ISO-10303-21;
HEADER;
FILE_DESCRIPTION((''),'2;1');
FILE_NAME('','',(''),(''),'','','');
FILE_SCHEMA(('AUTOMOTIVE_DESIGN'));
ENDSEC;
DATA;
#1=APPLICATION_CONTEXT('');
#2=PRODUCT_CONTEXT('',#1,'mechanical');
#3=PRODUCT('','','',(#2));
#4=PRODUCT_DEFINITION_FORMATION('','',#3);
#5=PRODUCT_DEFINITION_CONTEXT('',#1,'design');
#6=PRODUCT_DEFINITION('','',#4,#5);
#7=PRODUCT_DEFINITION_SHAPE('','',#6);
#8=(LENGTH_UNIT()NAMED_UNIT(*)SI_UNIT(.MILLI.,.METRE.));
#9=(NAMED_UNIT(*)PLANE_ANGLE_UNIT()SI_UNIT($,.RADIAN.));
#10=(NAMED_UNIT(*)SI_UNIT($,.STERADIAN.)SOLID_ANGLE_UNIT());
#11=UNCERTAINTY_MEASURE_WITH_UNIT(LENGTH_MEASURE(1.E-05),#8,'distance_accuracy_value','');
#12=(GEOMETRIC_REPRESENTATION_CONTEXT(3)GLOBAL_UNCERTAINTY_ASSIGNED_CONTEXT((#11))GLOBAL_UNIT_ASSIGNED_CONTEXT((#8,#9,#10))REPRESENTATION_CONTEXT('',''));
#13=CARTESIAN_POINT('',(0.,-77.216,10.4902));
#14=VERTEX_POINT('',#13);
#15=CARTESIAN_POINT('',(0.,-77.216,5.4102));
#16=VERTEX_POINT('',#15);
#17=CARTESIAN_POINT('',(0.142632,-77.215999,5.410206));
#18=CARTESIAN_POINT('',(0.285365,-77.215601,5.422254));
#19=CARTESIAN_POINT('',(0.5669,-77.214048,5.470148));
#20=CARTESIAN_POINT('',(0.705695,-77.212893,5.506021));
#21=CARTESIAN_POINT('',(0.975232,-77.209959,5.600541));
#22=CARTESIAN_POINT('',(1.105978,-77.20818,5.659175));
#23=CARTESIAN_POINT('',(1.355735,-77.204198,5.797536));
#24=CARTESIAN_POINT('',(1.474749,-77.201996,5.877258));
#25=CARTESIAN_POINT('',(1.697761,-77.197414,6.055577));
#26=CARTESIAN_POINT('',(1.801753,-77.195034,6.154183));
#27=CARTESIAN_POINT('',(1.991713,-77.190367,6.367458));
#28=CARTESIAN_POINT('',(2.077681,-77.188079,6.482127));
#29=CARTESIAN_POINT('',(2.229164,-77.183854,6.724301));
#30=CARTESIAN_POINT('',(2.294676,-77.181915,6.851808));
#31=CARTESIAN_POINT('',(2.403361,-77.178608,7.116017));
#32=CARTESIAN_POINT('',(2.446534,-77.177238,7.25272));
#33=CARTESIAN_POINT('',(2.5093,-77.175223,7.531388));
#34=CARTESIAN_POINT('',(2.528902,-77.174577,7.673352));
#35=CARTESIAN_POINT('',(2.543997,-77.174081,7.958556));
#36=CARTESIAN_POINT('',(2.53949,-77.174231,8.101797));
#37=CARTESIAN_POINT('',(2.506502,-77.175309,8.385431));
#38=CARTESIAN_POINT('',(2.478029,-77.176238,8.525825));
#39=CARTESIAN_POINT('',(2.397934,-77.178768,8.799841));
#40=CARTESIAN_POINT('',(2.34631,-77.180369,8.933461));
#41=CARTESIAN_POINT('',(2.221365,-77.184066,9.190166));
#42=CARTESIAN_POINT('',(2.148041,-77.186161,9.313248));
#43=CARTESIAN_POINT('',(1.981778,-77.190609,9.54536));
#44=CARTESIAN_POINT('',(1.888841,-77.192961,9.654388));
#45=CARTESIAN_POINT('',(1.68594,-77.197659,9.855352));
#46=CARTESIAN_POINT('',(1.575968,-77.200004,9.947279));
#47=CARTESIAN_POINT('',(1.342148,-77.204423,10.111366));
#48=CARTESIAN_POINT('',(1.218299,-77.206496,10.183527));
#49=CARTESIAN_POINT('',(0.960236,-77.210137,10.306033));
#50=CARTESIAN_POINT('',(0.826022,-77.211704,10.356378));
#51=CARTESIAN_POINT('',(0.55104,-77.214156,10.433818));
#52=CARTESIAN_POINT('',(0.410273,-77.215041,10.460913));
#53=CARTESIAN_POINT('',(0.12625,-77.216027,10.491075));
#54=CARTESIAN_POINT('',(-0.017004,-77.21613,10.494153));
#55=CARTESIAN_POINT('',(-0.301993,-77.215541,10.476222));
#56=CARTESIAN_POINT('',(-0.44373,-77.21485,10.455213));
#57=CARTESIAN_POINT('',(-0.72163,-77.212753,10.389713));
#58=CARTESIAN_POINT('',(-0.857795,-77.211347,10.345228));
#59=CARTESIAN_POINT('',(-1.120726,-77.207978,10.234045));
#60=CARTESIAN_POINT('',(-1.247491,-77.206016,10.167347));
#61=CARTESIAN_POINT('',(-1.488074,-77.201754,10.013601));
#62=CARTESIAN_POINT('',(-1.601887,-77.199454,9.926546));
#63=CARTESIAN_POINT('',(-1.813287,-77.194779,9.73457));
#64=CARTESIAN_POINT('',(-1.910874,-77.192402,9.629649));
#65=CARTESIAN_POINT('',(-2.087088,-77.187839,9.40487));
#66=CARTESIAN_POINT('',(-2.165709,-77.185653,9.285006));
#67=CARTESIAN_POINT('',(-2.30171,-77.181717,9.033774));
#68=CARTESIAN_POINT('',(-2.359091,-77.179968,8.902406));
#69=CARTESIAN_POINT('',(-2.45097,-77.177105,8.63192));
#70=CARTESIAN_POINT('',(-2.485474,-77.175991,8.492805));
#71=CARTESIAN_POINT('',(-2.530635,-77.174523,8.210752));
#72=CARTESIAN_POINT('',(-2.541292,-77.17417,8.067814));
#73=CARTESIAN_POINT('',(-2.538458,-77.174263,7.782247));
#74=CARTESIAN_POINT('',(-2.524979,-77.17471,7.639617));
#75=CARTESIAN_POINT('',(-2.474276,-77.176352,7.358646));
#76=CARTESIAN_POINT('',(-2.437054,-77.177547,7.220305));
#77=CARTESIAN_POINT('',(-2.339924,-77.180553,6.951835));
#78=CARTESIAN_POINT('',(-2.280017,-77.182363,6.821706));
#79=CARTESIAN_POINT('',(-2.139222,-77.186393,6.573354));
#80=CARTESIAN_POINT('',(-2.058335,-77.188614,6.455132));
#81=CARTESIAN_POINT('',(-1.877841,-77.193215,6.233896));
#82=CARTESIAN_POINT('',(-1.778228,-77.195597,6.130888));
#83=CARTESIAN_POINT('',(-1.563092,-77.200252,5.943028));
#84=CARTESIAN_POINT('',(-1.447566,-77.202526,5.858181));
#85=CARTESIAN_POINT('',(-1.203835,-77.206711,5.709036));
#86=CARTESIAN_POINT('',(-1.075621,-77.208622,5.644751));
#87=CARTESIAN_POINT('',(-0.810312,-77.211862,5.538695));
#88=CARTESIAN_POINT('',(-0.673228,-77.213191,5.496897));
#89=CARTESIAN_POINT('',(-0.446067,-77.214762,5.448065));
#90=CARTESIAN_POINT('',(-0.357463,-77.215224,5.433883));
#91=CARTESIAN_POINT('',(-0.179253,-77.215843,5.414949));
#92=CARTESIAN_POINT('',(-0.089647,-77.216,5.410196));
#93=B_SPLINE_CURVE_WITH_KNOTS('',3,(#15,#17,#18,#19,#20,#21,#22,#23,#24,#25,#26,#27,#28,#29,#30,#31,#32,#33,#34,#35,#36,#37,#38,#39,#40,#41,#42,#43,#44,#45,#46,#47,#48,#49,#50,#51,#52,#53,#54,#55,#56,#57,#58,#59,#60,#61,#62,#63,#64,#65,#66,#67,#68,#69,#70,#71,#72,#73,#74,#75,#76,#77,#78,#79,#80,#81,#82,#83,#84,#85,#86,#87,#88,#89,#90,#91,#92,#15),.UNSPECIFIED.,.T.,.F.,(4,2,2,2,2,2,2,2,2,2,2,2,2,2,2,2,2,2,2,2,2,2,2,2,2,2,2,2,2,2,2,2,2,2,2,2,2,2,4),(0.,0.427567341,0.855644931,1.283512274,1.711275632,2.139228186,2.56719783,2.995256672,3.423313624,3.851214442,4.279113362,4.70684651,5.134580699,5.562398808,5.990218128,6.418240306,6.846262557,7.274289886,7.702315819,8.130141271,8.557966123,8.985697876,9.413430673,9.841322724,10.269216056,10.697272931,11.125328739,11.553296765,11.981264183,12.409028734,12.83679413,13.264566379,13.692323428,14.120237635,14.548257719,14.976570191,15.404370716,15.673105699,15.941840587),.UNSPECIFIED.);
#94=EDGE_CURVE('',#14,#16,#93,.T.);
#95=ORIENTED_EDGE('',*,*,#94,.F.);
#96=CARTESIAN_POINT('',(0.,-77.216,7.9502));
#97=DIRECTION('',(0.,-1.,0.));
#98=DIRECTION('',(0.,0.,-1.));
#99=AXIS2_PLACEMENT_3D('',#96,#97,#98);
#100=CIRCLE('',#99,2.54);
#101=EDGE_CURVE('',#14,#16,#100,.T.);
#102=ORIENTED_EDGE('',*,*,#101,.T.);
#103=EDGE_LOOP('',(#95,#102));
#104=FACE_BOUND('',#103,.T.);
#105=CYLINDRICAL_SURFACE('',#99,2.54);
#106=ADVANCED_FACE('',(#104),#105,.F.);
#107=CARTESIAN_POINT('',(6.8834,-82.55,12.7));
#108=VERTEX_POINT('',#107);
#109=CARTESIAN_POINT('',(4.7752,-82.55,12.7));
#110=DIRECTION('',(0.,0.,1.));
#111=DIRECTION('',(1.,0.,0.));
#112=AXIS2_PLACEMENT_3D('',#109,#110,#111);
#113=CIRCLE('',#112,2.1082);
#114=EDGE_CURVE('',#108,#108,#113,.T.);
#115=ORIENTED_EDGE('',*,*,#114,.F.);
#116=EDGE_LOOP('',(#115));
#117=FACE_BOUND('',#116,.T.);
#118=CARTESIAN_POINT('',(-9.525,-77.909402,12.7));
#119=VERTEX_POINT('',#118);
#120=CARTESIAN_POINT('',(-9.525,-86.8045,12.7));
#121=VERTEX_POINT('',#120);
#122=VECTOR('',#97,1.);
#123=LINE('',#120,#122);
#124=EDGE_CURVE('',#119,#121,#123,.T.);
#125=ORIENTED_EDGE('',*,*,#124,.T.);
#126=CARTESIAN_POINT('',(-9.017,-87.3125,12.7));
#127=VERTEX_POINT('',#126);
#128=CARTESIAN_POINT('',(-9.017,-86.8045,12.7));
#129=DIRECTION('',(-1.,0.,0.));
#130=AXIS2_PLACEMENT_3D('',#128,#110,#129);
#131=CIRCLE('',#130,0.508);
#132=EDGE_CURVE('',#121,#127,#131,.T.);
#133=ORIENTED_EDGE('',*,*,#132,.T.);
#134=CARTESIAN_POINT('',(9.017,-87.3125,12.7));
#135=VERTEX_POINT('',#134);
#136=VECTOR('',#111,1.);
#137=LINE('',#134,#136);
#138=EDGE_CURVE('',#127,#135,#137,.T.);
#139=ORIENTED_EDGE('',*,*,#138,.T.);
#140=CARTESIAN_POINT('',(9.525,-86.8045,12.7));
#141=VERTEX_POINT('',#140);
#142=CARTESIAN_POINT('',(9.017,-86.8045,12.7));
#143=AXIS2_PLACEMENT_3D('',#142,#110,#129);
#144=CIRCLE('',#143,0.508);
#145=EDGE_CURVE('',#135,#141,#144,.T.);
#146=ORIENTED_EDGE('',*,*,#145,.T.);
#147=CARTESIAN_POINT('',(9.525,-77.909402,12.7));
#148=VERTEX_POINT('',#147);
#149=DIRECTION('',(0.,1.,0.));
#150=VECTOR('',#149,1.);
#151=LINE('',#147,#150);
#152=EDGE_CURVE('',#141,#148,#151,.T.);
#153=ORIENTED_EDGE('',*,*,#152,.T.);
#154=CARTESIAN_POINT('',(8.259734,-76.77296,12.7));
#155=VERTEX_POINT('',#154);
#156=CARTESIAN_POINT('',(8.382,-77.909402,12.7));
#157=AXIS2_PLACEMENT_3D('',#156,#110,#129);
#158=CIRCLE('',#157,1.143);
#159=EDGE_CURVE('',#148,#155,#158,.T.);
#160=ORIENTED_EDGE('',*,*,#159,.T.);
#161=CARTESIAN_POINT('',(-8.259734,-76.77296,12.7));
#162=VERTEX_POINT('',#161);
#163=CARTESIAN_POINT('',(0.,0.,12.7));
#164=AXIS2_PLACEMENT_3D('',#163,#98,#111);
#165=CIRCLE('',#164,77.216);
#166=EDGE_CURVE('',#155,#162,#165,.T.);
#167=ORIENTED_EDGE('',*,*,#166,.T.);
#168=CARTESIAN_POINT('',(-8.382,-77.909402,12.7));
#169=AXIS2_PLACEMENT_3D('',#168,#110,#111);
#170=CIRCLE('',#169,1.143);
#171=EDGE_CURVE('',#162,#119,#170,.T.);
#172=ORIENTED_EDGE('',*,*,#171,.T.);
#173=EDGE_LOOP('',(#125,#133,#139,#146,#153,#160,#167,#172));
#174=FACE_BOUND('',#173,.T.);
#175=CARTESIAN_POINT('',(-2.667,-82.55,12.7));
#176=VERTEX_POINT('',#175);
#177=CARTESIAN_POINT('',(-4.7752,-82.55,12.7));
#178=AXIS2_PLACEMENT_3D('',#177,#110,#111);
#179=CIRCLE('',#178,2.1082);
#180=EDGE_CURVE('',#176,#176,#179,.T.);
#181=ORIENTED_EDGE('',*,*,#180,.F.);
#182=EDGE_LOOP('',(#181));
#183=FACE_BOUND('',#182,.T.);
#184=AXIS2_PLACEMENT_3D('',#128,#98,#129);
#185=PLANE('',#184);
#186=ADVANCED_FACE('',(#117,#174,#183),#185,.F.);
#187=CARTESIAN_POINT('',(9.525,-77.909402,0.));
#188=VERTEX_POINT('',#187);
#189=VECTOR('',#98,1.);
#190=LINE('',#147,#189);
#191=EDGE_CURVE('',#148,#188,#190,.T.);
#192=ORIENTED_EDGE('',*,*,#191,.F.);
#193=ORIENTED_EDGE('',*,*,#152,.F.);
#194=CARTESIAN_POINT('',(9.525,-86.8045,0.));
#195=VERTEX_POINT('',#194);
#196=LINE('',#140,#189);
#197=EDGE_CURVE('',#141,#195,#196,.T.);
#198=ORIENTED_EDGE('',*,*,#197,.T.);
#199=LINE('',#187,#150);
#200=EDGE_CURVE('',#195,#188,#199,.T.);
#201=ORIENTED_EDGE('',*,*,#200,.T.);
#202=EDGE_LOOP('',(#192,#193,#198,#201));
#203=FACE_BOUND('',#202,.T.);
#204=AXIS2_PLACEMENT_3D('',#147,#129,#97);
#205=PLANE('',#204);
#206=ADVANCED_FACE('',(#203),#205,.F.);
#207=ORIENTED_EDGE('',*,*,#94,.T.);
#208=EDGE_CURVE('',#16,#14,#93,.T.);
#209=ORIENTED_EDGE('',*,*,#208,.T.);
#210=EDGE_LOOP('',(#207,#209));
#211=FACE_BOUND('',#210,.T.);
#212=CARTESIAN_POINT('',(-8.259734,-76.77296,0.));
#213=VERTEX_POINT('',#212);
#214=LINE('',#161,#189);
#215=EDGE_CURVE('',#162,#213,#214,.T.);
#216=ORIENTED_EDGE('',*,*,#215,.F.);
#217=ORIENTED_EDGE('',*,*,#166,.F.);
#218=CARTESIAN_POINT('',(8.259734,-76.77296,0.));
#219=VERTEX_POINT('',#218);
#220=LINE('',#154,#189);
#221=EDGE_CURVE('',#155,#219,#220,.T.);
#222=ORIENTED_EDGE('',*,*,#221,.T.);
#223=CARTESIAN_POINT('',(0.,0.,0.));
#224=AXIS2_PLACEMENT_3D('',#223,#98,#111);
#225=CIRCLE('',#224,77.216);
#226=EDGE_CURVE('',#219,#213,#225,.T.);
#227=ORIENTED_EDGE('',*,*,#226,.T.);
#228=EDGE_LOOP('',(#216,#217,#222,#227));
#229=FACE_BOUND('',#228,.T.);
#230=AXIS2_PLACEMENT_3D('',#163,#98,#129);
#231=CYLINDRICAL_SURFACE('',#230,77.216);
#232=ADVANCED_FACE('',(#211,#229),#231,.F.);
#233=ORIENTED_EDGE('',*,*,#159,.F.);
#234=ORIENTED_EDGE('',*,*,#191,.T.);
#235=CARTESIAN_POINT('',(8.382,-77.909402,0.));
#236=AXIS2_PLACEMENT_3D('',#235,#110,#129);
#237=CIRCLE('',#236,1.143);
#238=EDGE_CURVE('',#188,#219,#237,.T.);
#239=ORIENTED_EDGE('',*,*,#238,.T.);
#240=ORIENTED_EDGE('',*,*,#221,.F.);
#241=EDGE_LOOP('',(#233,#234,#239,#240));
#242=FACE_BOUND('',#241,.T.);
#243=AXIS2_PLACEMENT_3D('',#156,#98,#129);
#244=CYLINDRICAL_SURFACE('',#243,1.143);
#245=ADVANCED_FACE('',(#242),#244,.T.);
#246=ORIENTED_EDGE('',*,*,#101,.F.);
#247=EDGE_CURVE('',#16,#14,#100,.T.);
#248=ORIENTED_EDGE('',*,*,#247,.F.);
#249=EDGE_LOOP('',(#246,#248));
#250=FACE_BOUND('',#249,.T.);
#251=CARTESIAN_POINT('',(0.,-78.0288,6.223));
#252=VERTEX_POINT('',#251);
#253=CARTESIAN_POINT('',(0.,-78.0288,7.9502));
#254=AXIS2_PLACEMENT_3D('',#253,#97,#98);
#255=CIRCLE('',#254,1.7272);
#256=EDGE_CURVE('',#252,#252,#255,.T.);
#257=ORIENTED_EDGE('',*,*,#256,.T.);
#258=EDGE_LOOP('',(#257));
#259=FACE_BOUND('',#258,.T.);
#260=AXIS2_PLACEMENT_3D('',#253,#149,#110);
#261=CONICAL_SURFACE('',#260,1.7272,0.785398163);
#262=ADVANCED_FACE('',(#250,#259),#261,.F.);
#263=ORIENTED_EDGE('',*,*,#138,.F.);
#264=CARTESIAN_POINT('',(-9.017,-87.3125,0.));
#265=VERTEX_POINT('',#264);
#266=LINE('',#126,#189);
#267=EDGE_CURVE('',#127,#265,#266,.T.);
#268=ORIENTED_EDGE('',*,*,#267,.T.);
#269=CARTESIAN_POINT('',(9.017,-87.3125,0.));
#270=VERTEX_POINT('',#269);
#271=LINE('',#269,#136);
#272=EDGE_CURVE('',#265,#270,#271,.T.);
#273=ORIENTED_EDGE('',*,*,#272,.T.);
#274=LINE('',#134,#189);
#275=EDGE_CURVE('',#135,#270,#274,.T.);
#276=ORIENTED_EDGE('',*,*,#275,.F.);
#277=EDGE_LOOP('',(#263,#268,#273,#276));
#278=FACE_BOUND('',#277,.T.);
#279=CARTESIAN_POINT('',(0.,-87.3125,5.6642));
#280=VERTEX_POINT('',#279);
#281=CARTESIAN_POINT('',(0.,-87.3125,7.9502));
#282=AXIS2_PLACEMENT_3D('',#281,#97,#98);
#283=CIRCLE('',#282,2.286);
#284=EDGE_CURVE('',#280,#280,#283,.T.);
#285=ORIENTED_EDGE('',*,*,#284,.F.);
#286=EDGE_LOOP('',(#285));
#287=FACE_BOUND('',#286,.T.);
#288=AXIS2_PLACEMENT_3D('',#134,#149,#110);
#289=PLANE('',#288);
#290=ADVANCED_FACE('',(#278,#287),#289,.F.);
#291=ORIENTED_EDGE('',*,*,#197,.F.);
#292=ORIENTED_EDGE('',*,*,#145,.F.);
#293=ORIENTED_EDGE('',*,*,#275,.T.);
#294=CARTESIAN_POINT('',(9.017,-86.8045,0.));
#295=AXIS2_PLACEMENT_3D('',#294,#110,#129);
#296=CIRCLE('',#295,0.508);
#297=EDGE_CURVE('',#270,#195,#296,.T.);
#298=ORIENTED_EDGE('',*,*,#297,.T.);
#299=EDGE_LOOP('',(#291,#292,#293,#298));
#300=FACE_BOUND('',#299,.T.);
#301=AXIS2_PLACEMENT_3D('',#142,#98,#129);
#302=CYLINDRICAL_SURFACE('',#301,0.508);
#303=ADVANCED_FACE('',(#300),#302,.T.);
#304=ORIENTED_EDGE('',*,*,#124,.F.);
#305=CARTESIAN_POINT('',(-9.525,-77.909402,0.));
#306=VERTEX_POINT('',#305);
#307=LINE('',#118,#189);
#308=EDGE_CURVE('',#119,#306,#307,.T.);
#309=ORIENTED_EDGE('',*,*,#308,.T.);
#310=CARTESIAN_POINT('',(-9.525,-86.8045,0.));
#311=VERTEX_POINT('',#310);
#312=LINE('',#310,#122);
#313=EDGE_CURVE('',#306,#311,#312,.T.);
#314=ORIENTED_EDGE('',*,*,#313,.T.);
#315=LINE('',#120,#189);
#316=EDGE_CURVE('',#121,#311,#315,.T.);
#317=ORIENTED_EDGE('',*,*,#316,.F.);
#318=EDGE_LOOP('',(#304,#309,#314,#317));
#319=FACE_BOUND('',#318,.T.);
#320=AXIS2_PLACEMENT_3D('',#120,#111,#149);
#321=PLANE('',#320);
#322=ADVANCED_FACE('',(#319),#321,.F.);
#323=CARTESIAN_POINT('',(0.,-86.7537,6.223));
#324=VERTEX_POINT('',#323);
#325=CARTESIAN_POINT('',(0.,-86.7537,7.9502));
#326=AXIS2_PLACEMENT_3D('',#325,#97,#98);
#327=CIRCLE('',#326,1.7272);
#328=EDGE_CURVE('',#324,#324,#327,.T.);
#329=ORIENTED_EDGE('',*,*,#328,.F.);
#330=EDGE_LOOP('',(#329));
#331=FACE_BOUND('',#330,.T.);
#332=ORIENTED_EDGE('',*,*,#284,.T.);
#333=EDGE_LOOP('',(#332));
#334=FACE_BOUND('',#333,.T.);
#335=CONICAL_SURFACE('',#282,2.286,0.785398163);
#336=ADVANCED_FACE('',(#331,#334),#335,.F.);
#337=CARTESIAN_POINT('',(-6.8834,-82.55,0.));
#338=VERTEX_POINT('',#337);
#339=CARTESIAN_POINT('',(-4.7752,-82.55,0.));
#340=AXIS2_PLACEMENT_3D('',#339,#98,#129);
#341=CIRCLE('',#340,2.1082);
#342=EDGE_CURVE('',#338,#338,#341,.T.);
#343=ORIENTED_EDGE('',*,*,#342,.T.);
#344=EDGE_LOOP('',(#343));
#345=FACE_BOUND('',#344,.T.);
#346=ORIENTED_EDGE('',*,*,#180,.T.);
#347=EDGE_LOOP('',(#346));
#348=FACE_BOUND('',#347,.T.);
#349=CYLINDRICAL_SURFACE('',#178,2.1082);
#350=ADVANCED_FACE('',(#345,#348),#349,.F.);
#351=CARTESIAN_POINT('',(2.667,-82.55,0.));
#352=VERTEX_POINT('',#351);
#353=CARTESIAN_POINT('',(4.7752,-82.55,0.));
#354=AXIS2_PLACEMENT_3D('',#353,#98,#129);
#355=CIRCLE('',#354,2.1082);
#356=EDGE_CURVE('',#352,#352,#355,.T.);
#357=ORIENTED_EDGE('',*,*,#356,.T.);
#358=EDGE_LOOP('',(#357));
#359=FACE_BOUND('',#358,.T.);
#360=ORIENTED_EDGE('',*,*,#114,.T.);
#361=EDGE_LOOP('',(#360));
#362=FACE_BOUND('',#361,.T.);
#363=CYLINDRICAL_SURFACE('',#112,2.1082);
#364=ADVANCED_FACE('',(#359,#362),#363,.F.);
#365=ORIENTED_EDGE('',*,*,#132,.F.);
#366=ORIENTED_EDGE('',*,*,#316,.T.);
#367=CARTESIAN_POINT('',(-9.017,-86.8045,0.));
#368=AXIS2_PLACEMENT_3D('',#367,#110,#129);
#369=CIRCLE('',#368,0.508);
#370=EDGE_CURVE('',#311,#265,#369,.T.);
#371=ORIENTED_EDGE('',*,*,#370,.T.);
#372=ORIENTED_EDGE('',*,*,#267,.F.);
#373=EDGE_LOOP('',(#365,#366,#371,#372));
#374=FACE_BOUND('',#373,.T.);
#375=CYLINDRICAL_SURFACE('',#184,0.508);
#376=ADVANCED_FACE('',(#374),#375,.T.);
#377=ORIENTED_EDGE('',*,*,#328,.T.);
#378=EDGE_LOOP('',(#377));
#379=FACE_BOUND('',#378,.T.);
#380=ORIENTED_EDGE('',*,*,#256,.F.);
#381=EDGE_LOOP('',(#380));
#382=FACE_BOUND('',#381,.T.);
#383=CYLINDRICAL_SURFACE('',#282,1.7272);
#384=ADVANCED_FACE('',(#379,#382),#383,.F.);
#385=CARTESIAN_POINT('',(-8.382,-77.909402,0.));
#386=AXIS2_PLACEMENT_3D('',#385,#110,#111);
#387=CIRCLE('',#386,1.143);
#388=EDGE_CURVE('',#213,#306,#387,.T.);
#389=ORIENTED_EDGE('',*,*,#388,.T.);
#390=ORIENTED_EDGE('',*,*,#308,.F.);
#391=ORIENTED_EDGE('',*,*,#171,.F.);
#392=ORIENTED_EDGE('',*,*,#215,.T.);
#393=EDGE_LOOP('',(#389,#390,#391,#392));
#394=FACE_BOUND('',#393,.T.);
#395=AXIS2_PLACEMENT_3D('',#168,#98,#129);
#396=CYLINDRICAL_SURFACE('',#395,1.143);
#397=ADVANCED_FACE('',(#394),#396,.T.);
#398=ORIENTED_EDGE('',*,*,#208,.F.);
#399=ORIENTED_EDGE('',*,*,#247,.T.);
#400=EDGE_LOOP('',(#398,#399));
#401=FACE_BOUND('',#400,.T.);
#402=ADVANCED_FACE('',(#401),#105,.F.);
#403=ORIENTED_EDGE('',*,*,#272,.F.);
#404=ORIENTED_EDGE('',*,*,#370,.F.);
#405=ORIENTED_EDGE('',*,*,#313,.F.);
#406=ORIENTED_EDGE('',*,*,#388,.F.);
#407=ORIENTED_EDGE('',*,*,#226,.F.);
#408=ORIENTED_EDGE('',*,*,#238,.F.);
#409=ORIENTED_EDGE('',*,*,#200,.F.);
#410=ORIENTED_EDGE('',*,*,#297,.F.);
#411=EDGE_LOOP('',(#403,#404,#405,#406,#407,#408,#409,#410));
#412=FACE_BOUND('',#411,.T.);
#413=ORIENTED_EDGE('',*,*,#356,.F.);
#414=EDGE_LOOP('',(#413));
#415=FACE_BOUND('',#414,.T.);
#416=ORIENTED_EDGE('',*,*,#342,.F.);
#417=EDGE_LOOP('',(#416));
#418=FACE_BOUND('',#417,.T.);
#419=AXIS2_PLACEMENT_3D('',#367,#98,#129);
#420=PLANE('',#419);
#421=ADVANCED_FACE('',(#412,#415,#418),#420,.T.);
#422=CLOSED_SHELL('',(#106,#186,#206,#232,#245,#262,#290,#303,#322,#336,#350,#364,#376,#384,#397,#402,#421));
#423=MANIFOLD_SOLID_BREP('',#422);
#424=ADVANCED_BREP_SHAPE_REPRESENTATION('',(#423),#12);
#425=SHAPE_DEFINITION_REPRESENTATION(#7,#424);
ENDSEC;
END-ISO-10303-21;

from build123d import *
from build123d.topology import SkipClean

# Parameters (mm, degrees)
BOSS_EXTRUDE1_DEPTH             = 12.7
F_19_0_166_DIAMETER_HOLE1_D     = 4.2164
F_19_0_166_DIAMETER_HOLE1_DEPTH = 15.875
F_19_0_166_DIAMETER_HOLE1_TIP   = 1.266734357


# Read off the part's stored shape, not the designer's step: #8-32 Tapped Hole1
with BuildPart() as part:
    # Sketch1 → Boss-Extrude1 (new body)
    with BuildSketch(Plane.XY):
        with BuildLine():
            Line((9.525, -77.909402237), (9.525, -86.8045))
            ThreePointArc((9.525, -86.8045), (9.376210245, -87.163710245), (9.017, -87.3125))
            Line((9.017, -87.3125), (-9.017, -87.3125))
            ThreePointArc((-9.017, -87.3125), (-9.376210245, -87.163710245), (-9.525, -86.8045))
            Line((-9.525, -86.8045), (-9.525, -77.909402237))
            ThreePointArc((-9.525, -77.909402237), (-9.145773261, -77.059049719), (-8.259734198, -76.77296039))
            ThreePointArc((-8.259734198, -76.77296039), (0, -77.216), (8.259734198, -76.77296039))
            ThreePointArc((8.259734198, -76.77296039), (9.145773261, -77.059049719), (9.525, -77.909402237))
        make_face()
    extrude(amount=BOSS_EXTRUDE1_DEPTH)

    # #19 (0.166) Diameter Hole1
    with Locations(Plane.XY.offset(12.7)):
        with Locations((4.7752, -82.55), (-4.7752, -82.55)):
            Hole(F_19_0_166_DIAMETER_HOLE1_D / 2, depth=F_19_0_166_DIAMETER_HOLE1_DEPTH)
            with Locations((0, 0, -(F_19_0_166_DIAMETER_HOLE1_DEPTH + F_19_0_166_DIAMETER_HOLE1_TIP / 2))):  # 118° drill point
                Cone(0, F_19_0_166_DIAMETER_HOLE1_D / 2, F_19_0_166_DIAMETER_HOLE1_TIP, mode=Mode.SUBTRACT)

    # #8-32 Tapped Hole1 outline → #8-32 Tapped Hole1 (revolve, cut)
    with SkipClean():  # the faces are left unmerged after this step: merging them gives an invalid solid
        with BuildSketch(Plane.XY.offset(7.9502)):
            Polygon((2.54, -77.216), (2.54, -77.174195215), (0, -77.174194503), (0, -87.3125), (2.286, -87.3125), (1.7272, -86.7537), (1.7272, -78.0288), align=None)
        revolve(axis=Axis((0, 0, 7.9502), (0, 1, 0)), mode=Mode.SUBTRACT)


solid = part.part
